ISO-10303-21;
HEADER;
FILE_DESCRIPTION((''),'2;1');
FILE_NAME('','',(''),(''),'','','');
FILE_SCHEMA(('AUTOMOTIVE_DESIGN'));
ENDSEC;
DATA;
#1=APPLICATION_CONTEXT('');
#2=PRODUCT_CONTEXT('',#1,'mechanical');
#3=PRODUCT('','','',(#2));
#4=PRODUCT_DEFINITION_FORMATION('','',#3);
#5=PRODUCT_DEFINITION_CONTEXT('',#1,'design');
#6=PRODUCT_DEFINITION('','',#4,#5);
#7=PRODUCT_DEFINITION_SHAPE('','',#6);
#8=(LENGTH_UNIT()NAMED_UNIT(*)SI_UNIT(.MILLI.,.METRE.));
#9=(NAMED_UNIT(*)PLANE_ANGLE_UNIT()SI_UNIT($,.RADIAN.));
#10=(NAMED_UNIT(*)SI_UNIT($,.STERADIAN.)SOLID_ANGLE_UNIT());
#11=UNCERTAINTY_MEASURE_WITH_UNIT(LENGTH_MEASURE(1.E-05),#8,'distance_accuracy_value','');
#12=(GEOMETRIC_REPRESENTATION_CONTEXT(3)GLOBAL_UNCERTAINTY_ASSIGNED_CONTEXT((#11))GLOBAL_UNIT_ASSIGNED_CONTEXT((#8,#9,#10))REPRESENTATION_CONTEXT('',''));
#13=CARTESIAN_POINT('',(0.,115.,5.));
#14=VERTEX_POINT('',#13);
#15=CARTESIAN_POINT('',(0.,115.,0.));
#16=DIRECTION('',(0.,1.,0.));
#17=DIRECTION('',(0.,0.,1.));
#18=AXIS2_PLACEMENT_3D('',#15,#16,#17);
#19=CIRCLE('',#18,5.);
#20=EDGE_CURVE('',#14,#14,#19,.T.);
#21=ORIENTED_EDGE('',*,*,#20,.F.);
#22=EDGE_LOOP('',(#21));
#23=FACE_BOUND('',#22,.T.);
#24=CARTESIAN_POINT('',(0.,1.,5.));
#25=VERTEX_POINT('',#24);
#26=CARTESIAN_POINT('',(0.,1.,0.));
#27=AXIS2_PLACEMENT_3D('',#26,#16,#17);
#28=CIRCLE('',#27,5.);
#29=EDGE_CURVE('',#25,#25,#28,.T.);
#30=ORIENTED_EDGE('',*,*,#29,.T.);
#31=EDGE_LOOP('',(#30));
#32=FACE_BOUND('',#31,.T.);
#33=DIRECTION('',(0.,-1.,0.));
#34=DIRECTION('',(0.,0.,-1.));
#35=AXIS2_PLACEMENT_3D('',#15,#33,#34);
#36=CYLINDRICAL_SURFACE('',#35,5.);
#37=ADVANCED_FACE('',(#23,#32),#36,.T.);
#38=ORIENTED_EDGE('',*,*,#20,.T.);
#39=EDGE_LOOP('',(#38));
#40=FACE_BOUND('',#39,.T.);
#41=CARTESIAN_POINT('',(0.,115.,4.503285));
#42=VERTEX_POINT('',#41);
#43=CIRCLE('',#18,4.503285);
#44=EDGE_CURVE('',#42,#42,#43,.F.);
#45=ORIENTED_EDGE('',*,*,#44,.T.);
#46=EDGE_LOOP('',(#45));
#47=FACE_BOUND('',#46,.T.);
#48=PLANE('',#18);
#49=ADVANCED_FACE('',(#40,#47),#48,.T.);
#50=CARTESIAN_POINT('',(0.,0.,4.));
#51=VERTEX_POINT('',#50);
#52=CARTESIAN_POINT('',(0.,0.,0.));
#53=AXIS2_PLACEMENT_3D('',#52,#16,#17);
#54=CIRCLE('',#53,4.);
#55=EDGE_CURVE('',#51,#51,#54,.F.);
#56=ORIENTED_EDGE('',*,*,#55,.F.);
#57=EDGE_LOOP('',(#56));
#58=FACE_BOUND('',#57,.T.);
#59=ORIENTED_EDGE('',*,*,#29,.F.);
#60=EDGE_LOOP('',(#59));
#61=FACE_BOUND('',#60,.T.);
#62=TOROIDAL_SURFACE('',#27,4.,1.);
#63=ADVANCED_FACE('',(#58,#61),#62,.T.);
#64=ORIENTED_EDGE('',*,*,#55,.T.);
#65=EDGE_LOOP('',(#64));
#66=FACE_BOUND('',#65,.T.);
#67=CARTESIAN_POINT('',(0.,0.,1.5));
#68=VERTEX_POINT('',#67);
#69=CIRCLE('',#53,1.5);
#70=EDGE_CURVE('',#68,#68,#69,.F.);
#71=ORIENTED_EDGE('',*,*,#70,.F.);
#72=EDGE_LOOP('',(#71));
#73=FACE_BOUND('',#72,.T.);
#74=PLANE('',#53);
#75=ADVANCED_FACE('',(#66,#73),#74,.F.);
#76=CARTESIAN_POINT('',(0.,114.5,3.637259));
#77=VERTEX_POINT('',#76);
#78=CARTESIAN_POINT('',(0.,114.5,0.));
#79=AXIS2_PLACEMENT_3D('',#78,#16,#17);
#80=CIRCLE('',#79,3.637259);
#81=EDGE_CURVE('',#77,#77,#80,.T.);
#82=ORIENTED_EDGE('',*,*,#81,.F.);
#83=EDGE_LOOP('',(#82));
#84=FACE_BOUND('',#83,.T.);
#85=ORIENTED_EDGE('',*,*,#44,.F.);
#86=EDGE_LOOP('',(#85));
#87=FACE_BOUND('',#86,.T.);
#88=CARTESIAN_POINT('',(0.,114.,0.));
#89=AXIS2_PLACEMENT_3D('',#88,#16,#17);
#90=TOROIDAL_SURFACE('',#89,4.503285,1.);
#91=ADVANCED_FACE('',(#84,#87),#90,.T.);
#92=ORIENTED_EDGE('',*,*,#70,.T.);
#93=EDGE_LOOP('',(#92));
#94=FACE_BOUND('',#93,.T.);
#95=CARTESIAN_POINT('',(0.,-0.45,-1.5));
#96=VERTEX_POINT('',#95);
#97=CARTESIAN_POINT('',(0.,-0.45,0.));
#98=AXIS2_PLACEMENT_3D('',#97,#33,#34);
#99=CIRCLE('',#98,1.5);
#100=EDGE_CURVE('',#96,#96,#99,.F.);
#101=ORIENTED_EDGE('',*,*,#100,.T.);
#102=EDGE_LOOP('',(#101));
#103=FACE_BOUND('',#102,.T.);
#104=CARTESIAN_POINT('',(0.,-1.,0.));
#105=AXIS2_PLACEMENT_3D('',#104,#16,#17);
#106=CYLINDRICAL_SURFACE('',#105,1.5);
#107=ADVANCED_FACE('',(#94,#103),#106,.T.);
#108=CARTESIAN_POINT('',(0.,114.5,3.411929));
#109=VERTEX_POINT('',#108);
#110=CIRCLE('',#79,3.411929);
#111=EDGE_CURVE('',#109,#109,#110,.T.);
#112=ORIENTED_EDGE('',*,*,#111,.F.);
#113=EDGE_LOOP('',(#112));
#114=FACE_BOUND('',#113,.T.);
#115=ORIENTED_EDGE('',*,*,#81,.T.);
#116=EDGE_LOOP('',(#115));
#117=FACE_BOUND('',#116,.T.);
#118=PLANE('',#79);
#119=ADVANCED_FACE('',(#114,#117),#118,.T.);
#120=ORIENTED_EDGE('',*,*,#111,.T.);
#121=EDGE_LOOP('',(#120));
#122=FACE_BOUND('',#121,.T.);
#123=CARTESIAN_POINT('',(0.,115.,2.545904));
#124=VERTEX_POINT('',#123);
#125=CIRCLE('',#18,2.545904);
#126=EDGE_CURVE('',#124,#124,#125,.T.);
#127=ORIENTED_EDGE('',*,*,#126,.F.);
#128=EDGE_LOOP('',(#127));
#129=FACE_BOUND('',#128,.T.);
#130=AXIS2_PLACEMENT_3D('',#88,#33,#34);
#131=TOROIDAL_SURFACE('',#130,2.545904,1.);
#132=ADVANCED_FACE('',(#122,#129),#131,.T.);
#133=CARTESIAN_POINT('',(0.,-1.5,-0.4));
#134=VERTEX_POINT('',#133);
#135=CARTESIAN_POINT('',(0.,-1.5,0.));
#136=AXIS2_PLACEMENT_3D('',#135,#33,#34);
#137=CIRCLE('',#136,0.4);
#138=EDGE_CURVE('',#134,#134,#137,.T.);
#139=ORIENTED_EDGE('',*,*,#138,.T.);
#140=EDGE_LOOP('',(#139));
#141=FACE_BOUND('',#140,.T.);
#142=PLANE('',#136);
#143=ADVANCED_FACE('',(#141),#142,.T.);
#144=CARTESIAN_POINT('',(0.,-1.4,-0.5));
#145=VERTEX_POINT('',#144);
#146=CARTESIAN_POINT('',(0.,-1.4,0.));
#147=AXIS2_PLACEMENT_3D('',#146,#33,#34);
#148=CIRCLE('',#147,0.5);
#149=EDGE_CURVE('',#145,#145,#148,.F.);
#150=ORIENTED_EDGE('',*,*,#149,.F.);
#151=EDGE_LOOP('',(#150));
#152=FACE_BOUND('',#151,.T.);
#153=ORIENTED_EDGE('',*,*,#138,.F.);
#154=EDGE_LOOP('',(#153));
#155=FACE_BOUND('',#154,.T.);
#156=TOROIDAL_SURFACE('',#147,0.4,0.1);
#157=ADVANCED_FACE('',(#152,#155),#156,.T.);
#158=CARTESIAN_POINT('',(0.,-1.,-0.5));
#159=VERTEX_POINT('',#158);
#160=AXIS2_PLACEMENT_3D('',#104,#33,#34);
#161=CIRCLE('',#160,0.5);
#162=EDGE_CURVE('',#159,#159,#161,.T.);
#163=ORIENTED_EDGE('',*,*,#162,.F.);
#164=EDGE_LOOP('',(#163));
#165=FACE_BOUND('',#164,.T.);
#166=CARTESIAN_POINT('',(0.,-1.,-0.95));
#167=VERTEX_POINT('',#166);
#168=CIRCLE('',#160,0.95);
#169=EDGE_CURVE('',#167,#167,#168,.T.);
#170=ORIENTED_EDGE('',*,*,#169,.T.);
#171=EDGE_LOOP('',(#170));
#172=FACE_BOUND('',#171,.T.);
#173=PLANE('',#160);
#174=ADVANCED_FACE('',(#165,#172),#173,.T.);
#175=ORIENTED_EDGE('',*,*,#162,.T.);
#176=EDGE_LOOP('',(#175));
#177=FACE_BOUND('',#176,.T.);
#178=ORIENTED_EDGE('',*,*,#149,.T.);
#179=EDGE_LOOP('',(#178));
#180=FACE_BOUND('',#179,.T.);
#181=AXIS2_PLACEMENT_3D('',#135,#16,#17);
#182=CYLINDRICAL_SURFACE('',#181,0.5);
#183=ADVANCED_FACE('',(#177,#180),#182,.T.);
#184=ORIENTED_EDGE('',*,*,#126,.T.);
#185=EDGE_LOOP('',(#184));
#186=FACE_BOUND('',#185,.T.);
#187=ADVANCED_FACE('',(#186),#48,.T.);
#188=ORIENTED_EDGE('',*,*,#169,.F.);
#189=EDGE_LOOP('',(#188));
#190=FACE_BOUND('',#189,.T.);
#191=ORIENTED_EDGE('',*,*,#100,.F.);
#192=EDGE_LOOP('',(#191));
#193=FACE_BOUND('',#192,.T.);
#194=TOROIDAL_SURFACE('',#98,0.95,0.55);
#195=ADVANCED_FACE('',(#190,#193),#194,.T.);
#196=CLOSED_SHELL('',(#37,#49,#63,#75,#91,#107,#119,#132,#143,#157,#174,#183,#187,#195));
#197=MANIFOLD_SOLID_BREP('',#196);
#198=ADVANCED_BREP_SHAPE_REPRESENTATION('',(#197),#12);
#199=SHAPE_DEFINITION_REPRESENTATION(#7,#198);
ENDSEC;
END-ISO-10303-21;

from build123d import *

# Parameters (mm, degrees)
SKETCH1_R           = 5
BOSS_EXTRUDE1_DEPTH = 115
SKETCH2_R           = 1.5
BOSS_EXTRUDE2_DEPTH = 1
SKETCH3_R           = 0.5
BOSS_EXTRUDE3_DEPTH = 0.5
SKETCH4_R           = 3.63725935
SKETCH4_R_2         = 3.411929034
CUT_EXTRUDE1_DEPTH  = 0.5
FILLET1_R           = 1
FILLET2_R           = 1
FILLET6_R           = 0.55
FILLET7_R           = 0.1


with BuildPart() as part:
    # Sketch1 → Boss-Extrude1 (new body)
    with BuildSketch(Plane(origin=(0, 0, 0), x_dir=(1, 0, 0), z_dir=(0, 1, 0))):
        with Locations(Location((0, 0, 0), (0, 0, 270))):
            Circle(SKETCH1_R)
    extrude(amount=BOSS_EXTRUDE1_DEPTH)

    # Sketch2 → Boss-Extrude2 (add)
    with BuildSketch(Plane.XZ):
        with Locations(Location((0, 0, 0), (0, 0, 90))):
            Circle(SKETCH2_R)
    extrude(amount=BOSS_EXTRUDE2_DEPTH)

    # Sketch3 → Boss-Extrude3 (add)
    with BuildSketch(Plane.XZ.offset(1)):
        with Locations(Location((0, 0, 0), (0, 0, 270))):
            Circle(SKETCH3_R)
    extrude(amount=BOSS_EXTRUDE3_DEPTH)

    # Sketch4 → Cut-Extrude1 (cut)
    with BuildSketch(Plane(origin=(0, 115, 0), x_dir=(1, 0, 0), z_dir=(0, 1, 0))):
        with Locations(Location((0, 0, 0), (0, 0, 270))):
            Circle(SKETCH4_R)
        with Locations(Location((0, 0, 0), (0, 0, 270))):
            Circle(SKETCH4_R_2, mode=Mode.SUBTRACT)
    extrude(amount=-CUT_EXTRUDE1_DEPTH, mode=Mode.SUBTRACT)

    # Fillet1
    # the kernel refuses this fillet: 1 mm, written as the material it takes off along each edge
    with BuildSketch(Plane(origin=(0, 115, 0), x_dir=(0, 0, 1), z_dir=(-1, 0, 0))) as fillet1_piece_1:
        with BuildLine():
            CenterArc((4.503284754, -1), FILLET1_R, 90, 60)
            Line((3.63725935, -0.5), (3.619938842, -0.49))
            ThreePointArc((3.619938842, -0.49), (3.61725935, -0.25), (3.61725935, 0))
            Line((3.61725935, 0), (3.63725935, 0.02))
            Line((3.63725935, 0.02), (4.503284754, 0.02))
            Line((4.503284754, 0.02), (4.503284754, 0))
        make_face()
    revolve(axis=Axis((0, 115, 0), (0, 1, 0)), mode=Mode.SUBTRACT)
    with BuildSketch(Plane(origin=(0, 115, 0), x_dir=(0, 0, 1), z_dir=(-1, 0, 0))) as fillet1_piece_2:
        with BuildLine():
            CenterArc((2.545903631, -1), FILLET1_R, 30, 60)
            Line((2.545903631, 0), (2.545903631, 0.02))
            Line((2.545903631, 0.02), (3.411929034, 0.02))
            Line((3.411929034, 0.02), (3.431929034, 0))
            ThreePointArc((3.431929034, 0), (3.431929034, -0.25), (3.429249543, -0.49))
            Line((3.429249543, -0.49), (3.411929034, -0.5))
        make_face()
    revolve(axis=Axis((0, 115, 0), (0, 1, 0)), mode=Mode.SUBTRACT)

    # Fillet2
    fillet2_edges = [part.edges().sort_by_distance(p)[0] for p in [
        (0, 0, -5),
    ]]
    fillet(fillet2_edges, radius=FILLET2_R)

    # Fillet6
    fillet6_edges = [part.edges().sort_by_distance(p)[0] for p in [
        (0, -1, -1.5),
    ]]
    fillet(fillet6_edges, radius=FILLET6_R)

    # Fillet7
    fillet7_edges = [part.edges().sort_by_distance(p)[0] for p in [
        (0, -1.5, 0.5),
    ]]
    fillet(fillet7_edges, radius=FILLET7_R)


solid = part.part
